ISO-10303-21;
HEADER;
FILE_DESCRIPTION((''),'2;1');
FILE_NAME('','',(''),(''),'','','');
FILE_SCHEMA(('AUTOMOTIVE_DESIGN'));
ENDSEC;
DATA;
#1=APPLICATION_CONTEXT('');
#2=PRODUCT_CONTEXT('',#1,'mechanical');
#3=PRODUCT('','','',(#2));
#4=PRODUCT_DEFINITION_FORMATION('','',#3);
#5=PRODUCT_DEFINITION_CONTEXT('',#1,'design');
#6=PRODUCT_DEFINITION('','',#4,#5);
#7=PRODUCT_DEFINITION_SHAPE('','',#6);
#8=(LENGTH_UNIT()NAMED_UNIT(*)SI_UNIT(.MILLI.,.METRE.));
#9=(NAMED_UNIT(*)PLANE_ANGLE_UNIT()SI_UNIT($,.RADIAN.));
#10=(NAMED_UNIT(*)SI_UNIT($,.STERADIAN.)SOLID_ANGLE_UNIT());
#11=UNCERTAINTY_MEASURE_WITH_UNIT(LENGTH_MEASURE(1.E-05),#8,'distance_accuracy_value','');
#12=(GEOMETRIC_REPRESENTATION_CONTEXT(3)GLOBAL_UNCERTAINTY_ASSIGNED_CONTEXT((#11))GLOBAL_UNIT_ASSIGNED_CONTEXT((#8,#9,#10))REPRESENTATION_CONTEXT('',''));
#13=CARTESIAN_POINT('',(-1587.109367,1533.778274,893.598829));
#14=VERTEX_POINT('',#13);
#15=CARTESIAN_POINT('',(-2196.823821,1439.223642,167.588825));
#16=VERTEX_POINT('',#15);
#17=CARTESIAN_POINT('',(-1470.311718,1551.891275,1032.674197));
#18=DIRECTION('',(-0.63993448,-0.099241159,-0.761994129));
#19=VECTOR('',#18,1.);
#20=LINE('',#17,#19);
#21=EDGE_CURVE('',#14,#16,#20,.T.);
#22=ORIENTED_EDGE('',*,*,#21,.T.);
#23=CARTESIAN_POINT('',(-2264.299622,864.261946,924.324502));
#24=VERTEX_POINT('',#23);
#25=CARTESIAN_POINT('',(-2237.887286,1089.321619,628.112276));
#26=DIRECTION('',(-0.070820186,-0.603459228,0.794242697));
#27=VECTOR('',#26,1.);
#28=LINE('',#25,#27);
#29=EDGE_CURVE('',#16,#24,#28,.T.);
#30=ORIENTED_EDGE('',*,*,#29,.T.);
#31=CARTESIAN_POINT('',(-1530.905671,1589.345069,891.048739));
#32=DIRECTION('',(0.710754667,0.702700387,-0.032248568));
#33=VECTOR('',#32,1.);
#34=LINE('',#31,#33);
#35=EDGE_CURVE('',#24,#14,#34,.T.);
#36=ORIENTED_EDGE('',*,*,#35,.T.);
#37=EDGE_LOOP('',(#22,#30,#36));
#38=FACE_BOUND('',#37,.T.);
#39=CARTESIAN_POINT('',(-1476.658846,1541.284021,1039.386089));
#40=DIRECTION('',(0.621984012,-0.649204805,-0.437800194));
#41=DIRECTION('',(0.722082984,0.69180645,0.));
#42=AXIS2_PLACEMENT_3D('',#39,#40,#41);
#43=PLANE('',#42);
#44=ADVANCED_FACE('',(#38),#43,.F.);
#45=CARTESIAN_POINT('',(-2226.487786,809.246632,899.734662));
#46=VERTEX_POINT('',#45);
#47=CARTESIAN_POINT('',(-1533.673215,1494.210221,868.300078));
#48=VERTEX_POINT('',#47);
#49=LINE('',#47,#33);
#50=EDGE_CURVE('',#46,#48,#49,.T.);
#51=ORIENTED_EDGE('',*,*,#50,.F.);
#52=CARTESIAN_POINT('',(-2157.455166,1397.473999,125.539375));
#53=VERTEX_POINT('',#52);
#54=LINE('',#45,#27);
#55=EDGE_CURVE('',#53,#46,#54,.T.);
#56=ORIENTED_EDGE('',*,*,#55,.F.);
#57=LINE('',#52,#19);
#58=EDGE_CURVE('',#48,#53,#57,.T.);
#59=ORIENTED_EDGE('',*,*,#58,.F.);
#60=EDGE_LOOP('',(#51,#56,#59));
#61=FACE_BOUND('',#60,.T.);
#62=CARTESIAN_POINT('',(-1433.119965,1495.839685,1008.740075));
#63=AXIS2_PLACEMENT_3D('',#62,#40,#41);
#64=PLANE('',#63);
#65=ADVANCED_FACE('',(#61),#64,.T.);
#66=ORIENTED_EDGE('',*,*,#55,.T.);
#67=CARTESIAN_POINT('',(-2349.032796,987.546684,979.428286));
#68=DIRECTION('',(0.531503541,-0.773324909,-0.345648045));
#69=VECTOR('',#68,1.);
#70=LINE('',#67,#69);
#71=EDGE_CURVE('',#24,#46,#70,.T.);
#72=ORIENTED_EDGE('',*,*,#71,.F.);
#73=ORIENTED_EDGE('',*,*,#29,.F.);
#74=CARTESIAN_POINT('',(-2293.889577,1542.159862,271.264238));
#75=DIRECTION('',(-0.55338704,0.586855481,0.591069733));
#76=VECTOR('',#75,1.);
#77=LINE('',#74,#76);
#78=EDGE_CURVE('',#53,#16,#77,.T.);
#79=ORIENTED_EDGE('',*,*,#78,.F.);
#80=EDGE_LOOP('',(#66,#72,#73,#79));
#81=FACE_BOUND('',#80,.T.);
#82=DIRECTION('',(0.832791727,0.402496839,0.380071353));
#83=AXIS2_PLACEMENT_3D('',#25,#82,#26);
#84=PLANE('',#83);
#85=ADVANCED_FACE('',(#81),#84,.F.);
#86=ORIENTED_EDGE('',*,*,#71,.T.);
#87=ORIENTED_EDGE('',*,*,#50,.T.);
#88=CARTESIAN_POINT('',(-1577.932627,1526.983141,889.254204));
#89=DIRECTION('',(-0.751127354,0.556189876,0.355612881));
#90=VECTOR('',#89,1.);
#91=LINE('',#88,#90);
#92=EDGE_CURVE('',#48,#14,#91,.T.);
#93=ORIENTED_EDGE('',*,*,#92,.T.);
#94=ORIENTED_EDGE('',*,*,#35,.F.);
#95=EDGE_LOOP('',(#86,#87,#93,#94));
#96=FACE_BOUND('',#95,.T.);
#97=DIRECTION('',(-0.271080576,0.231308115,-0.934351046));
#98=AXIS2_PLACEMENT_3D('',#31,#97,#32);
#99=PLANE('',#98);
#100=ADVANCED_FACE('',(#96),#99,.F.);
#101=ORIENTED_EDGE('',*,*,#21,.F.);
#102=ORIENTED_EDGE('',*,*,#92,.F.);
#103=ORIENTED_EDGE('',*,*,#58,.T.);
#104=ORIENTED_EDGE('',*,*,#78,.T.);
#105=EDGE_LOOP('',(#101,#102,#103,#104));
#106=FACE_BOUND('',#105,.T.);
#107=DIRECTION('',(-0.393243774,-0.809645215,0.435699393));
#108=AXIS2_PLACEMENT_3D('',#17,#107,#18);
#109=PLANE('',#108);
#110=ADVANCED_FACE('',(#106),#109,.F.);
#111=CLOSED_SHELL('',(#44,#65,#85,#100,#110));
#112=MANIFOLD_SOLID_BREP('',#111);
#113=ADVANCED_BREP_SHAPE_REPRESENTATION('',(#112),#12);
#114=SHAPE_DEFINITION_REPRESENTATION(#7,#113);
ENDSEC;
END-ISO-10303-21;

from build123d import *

# Parameters (mm, degrees)
BOSS_EXTRUDE1_DEPTH = 70
CHAMFER1_SIZE2      = 6.345862846
CHAMFER1_SIZE       = 70
CHAMFER2_SIZE2      = 6.345862846
CHAMFER2_SIZE       = 70
CHAMFER3_SIZE2      = 6.345862846
CHAMFER3_SIZE       = 70


with BuildPart() as part:
    # Sketch1 → Boss-Extrude1 (new body)
    with BuildSketch(Plane(origin=(-1433.119965314, 1495.839685025, 1008.740075281), x_dir=(0.7358390900822849, 0.2934391216969858, 0.6102739674642665), z_dir=(-0.6219840117130521, 0.6492048053824052, 0.43780019397178355))):
        Polygon((-160.176034679, 64.657883799), (-851.787483691, -622.240132354), (-1100.852890984, 320.161960115), align=None)
    extrude(amount=BOSS_EXTRUDE1_DEPTH)

    # Chamfer1
    chamfer1_edges = [part.edges().sort_by_distance(p)[0] for p in [
        (-1923.619381658, 1197.172763007, 914.663383892),
    ]]
    chamfer1_side = [part.faces().sort_by_distance(p)[0] for p in [
        (-1923.540441153, 1197.090367714, 914.607819493),
    ]]
    chamfer(chamfer1_edges, length=CHAMFER1_SIZE - 0.0001, length2=CHAMFER1_SIZE2 - 0.0001, reference=chamfer1_side[0])  # a hair under: the kernel refuses the full size

    # Chamfer2
    chamfer2_edges = [part.edges().sort_by_distance(p)[0] for p in [
        (-1891.447617283, 1490.922853817, 524.774000982),
    ]]
    chamfer2_side = [part.faces().sort_by_distance(p)[0] for p in [
        (-1891.368676779, 1490.840458524, 524.718436582),
    ]]
    chamfer(chamfer2_edges, length=CHAMFER2_SIZE - 0.0001, length2=CHAMFER2_SIZE2 - 0.0001, reference=chamfer2_side[0])  # a hair under: the kernel refuses the full size

    # Chamfer3
    chamfer3_edges = [part.edges().sort_by_distance(p)[0] for p in [
        (-2235.510357018, 1148.804652005, 543.283032262),
    ]]
    chamfer3_side = [part.faces().sort_by_distance(p)[0] for p in [
        (-2235.431416513, 1148.722256712, 543.227467862),
    ]]
    chamfer(chamfer3_edges, length=CHAMFER3_SIZE - 0.0001, length2=CHAMFER3_SIZE2 - 0.0001, reference=chamfer3_side[0])  # a hair under: the kernel refuses the full size


solid = part.part
